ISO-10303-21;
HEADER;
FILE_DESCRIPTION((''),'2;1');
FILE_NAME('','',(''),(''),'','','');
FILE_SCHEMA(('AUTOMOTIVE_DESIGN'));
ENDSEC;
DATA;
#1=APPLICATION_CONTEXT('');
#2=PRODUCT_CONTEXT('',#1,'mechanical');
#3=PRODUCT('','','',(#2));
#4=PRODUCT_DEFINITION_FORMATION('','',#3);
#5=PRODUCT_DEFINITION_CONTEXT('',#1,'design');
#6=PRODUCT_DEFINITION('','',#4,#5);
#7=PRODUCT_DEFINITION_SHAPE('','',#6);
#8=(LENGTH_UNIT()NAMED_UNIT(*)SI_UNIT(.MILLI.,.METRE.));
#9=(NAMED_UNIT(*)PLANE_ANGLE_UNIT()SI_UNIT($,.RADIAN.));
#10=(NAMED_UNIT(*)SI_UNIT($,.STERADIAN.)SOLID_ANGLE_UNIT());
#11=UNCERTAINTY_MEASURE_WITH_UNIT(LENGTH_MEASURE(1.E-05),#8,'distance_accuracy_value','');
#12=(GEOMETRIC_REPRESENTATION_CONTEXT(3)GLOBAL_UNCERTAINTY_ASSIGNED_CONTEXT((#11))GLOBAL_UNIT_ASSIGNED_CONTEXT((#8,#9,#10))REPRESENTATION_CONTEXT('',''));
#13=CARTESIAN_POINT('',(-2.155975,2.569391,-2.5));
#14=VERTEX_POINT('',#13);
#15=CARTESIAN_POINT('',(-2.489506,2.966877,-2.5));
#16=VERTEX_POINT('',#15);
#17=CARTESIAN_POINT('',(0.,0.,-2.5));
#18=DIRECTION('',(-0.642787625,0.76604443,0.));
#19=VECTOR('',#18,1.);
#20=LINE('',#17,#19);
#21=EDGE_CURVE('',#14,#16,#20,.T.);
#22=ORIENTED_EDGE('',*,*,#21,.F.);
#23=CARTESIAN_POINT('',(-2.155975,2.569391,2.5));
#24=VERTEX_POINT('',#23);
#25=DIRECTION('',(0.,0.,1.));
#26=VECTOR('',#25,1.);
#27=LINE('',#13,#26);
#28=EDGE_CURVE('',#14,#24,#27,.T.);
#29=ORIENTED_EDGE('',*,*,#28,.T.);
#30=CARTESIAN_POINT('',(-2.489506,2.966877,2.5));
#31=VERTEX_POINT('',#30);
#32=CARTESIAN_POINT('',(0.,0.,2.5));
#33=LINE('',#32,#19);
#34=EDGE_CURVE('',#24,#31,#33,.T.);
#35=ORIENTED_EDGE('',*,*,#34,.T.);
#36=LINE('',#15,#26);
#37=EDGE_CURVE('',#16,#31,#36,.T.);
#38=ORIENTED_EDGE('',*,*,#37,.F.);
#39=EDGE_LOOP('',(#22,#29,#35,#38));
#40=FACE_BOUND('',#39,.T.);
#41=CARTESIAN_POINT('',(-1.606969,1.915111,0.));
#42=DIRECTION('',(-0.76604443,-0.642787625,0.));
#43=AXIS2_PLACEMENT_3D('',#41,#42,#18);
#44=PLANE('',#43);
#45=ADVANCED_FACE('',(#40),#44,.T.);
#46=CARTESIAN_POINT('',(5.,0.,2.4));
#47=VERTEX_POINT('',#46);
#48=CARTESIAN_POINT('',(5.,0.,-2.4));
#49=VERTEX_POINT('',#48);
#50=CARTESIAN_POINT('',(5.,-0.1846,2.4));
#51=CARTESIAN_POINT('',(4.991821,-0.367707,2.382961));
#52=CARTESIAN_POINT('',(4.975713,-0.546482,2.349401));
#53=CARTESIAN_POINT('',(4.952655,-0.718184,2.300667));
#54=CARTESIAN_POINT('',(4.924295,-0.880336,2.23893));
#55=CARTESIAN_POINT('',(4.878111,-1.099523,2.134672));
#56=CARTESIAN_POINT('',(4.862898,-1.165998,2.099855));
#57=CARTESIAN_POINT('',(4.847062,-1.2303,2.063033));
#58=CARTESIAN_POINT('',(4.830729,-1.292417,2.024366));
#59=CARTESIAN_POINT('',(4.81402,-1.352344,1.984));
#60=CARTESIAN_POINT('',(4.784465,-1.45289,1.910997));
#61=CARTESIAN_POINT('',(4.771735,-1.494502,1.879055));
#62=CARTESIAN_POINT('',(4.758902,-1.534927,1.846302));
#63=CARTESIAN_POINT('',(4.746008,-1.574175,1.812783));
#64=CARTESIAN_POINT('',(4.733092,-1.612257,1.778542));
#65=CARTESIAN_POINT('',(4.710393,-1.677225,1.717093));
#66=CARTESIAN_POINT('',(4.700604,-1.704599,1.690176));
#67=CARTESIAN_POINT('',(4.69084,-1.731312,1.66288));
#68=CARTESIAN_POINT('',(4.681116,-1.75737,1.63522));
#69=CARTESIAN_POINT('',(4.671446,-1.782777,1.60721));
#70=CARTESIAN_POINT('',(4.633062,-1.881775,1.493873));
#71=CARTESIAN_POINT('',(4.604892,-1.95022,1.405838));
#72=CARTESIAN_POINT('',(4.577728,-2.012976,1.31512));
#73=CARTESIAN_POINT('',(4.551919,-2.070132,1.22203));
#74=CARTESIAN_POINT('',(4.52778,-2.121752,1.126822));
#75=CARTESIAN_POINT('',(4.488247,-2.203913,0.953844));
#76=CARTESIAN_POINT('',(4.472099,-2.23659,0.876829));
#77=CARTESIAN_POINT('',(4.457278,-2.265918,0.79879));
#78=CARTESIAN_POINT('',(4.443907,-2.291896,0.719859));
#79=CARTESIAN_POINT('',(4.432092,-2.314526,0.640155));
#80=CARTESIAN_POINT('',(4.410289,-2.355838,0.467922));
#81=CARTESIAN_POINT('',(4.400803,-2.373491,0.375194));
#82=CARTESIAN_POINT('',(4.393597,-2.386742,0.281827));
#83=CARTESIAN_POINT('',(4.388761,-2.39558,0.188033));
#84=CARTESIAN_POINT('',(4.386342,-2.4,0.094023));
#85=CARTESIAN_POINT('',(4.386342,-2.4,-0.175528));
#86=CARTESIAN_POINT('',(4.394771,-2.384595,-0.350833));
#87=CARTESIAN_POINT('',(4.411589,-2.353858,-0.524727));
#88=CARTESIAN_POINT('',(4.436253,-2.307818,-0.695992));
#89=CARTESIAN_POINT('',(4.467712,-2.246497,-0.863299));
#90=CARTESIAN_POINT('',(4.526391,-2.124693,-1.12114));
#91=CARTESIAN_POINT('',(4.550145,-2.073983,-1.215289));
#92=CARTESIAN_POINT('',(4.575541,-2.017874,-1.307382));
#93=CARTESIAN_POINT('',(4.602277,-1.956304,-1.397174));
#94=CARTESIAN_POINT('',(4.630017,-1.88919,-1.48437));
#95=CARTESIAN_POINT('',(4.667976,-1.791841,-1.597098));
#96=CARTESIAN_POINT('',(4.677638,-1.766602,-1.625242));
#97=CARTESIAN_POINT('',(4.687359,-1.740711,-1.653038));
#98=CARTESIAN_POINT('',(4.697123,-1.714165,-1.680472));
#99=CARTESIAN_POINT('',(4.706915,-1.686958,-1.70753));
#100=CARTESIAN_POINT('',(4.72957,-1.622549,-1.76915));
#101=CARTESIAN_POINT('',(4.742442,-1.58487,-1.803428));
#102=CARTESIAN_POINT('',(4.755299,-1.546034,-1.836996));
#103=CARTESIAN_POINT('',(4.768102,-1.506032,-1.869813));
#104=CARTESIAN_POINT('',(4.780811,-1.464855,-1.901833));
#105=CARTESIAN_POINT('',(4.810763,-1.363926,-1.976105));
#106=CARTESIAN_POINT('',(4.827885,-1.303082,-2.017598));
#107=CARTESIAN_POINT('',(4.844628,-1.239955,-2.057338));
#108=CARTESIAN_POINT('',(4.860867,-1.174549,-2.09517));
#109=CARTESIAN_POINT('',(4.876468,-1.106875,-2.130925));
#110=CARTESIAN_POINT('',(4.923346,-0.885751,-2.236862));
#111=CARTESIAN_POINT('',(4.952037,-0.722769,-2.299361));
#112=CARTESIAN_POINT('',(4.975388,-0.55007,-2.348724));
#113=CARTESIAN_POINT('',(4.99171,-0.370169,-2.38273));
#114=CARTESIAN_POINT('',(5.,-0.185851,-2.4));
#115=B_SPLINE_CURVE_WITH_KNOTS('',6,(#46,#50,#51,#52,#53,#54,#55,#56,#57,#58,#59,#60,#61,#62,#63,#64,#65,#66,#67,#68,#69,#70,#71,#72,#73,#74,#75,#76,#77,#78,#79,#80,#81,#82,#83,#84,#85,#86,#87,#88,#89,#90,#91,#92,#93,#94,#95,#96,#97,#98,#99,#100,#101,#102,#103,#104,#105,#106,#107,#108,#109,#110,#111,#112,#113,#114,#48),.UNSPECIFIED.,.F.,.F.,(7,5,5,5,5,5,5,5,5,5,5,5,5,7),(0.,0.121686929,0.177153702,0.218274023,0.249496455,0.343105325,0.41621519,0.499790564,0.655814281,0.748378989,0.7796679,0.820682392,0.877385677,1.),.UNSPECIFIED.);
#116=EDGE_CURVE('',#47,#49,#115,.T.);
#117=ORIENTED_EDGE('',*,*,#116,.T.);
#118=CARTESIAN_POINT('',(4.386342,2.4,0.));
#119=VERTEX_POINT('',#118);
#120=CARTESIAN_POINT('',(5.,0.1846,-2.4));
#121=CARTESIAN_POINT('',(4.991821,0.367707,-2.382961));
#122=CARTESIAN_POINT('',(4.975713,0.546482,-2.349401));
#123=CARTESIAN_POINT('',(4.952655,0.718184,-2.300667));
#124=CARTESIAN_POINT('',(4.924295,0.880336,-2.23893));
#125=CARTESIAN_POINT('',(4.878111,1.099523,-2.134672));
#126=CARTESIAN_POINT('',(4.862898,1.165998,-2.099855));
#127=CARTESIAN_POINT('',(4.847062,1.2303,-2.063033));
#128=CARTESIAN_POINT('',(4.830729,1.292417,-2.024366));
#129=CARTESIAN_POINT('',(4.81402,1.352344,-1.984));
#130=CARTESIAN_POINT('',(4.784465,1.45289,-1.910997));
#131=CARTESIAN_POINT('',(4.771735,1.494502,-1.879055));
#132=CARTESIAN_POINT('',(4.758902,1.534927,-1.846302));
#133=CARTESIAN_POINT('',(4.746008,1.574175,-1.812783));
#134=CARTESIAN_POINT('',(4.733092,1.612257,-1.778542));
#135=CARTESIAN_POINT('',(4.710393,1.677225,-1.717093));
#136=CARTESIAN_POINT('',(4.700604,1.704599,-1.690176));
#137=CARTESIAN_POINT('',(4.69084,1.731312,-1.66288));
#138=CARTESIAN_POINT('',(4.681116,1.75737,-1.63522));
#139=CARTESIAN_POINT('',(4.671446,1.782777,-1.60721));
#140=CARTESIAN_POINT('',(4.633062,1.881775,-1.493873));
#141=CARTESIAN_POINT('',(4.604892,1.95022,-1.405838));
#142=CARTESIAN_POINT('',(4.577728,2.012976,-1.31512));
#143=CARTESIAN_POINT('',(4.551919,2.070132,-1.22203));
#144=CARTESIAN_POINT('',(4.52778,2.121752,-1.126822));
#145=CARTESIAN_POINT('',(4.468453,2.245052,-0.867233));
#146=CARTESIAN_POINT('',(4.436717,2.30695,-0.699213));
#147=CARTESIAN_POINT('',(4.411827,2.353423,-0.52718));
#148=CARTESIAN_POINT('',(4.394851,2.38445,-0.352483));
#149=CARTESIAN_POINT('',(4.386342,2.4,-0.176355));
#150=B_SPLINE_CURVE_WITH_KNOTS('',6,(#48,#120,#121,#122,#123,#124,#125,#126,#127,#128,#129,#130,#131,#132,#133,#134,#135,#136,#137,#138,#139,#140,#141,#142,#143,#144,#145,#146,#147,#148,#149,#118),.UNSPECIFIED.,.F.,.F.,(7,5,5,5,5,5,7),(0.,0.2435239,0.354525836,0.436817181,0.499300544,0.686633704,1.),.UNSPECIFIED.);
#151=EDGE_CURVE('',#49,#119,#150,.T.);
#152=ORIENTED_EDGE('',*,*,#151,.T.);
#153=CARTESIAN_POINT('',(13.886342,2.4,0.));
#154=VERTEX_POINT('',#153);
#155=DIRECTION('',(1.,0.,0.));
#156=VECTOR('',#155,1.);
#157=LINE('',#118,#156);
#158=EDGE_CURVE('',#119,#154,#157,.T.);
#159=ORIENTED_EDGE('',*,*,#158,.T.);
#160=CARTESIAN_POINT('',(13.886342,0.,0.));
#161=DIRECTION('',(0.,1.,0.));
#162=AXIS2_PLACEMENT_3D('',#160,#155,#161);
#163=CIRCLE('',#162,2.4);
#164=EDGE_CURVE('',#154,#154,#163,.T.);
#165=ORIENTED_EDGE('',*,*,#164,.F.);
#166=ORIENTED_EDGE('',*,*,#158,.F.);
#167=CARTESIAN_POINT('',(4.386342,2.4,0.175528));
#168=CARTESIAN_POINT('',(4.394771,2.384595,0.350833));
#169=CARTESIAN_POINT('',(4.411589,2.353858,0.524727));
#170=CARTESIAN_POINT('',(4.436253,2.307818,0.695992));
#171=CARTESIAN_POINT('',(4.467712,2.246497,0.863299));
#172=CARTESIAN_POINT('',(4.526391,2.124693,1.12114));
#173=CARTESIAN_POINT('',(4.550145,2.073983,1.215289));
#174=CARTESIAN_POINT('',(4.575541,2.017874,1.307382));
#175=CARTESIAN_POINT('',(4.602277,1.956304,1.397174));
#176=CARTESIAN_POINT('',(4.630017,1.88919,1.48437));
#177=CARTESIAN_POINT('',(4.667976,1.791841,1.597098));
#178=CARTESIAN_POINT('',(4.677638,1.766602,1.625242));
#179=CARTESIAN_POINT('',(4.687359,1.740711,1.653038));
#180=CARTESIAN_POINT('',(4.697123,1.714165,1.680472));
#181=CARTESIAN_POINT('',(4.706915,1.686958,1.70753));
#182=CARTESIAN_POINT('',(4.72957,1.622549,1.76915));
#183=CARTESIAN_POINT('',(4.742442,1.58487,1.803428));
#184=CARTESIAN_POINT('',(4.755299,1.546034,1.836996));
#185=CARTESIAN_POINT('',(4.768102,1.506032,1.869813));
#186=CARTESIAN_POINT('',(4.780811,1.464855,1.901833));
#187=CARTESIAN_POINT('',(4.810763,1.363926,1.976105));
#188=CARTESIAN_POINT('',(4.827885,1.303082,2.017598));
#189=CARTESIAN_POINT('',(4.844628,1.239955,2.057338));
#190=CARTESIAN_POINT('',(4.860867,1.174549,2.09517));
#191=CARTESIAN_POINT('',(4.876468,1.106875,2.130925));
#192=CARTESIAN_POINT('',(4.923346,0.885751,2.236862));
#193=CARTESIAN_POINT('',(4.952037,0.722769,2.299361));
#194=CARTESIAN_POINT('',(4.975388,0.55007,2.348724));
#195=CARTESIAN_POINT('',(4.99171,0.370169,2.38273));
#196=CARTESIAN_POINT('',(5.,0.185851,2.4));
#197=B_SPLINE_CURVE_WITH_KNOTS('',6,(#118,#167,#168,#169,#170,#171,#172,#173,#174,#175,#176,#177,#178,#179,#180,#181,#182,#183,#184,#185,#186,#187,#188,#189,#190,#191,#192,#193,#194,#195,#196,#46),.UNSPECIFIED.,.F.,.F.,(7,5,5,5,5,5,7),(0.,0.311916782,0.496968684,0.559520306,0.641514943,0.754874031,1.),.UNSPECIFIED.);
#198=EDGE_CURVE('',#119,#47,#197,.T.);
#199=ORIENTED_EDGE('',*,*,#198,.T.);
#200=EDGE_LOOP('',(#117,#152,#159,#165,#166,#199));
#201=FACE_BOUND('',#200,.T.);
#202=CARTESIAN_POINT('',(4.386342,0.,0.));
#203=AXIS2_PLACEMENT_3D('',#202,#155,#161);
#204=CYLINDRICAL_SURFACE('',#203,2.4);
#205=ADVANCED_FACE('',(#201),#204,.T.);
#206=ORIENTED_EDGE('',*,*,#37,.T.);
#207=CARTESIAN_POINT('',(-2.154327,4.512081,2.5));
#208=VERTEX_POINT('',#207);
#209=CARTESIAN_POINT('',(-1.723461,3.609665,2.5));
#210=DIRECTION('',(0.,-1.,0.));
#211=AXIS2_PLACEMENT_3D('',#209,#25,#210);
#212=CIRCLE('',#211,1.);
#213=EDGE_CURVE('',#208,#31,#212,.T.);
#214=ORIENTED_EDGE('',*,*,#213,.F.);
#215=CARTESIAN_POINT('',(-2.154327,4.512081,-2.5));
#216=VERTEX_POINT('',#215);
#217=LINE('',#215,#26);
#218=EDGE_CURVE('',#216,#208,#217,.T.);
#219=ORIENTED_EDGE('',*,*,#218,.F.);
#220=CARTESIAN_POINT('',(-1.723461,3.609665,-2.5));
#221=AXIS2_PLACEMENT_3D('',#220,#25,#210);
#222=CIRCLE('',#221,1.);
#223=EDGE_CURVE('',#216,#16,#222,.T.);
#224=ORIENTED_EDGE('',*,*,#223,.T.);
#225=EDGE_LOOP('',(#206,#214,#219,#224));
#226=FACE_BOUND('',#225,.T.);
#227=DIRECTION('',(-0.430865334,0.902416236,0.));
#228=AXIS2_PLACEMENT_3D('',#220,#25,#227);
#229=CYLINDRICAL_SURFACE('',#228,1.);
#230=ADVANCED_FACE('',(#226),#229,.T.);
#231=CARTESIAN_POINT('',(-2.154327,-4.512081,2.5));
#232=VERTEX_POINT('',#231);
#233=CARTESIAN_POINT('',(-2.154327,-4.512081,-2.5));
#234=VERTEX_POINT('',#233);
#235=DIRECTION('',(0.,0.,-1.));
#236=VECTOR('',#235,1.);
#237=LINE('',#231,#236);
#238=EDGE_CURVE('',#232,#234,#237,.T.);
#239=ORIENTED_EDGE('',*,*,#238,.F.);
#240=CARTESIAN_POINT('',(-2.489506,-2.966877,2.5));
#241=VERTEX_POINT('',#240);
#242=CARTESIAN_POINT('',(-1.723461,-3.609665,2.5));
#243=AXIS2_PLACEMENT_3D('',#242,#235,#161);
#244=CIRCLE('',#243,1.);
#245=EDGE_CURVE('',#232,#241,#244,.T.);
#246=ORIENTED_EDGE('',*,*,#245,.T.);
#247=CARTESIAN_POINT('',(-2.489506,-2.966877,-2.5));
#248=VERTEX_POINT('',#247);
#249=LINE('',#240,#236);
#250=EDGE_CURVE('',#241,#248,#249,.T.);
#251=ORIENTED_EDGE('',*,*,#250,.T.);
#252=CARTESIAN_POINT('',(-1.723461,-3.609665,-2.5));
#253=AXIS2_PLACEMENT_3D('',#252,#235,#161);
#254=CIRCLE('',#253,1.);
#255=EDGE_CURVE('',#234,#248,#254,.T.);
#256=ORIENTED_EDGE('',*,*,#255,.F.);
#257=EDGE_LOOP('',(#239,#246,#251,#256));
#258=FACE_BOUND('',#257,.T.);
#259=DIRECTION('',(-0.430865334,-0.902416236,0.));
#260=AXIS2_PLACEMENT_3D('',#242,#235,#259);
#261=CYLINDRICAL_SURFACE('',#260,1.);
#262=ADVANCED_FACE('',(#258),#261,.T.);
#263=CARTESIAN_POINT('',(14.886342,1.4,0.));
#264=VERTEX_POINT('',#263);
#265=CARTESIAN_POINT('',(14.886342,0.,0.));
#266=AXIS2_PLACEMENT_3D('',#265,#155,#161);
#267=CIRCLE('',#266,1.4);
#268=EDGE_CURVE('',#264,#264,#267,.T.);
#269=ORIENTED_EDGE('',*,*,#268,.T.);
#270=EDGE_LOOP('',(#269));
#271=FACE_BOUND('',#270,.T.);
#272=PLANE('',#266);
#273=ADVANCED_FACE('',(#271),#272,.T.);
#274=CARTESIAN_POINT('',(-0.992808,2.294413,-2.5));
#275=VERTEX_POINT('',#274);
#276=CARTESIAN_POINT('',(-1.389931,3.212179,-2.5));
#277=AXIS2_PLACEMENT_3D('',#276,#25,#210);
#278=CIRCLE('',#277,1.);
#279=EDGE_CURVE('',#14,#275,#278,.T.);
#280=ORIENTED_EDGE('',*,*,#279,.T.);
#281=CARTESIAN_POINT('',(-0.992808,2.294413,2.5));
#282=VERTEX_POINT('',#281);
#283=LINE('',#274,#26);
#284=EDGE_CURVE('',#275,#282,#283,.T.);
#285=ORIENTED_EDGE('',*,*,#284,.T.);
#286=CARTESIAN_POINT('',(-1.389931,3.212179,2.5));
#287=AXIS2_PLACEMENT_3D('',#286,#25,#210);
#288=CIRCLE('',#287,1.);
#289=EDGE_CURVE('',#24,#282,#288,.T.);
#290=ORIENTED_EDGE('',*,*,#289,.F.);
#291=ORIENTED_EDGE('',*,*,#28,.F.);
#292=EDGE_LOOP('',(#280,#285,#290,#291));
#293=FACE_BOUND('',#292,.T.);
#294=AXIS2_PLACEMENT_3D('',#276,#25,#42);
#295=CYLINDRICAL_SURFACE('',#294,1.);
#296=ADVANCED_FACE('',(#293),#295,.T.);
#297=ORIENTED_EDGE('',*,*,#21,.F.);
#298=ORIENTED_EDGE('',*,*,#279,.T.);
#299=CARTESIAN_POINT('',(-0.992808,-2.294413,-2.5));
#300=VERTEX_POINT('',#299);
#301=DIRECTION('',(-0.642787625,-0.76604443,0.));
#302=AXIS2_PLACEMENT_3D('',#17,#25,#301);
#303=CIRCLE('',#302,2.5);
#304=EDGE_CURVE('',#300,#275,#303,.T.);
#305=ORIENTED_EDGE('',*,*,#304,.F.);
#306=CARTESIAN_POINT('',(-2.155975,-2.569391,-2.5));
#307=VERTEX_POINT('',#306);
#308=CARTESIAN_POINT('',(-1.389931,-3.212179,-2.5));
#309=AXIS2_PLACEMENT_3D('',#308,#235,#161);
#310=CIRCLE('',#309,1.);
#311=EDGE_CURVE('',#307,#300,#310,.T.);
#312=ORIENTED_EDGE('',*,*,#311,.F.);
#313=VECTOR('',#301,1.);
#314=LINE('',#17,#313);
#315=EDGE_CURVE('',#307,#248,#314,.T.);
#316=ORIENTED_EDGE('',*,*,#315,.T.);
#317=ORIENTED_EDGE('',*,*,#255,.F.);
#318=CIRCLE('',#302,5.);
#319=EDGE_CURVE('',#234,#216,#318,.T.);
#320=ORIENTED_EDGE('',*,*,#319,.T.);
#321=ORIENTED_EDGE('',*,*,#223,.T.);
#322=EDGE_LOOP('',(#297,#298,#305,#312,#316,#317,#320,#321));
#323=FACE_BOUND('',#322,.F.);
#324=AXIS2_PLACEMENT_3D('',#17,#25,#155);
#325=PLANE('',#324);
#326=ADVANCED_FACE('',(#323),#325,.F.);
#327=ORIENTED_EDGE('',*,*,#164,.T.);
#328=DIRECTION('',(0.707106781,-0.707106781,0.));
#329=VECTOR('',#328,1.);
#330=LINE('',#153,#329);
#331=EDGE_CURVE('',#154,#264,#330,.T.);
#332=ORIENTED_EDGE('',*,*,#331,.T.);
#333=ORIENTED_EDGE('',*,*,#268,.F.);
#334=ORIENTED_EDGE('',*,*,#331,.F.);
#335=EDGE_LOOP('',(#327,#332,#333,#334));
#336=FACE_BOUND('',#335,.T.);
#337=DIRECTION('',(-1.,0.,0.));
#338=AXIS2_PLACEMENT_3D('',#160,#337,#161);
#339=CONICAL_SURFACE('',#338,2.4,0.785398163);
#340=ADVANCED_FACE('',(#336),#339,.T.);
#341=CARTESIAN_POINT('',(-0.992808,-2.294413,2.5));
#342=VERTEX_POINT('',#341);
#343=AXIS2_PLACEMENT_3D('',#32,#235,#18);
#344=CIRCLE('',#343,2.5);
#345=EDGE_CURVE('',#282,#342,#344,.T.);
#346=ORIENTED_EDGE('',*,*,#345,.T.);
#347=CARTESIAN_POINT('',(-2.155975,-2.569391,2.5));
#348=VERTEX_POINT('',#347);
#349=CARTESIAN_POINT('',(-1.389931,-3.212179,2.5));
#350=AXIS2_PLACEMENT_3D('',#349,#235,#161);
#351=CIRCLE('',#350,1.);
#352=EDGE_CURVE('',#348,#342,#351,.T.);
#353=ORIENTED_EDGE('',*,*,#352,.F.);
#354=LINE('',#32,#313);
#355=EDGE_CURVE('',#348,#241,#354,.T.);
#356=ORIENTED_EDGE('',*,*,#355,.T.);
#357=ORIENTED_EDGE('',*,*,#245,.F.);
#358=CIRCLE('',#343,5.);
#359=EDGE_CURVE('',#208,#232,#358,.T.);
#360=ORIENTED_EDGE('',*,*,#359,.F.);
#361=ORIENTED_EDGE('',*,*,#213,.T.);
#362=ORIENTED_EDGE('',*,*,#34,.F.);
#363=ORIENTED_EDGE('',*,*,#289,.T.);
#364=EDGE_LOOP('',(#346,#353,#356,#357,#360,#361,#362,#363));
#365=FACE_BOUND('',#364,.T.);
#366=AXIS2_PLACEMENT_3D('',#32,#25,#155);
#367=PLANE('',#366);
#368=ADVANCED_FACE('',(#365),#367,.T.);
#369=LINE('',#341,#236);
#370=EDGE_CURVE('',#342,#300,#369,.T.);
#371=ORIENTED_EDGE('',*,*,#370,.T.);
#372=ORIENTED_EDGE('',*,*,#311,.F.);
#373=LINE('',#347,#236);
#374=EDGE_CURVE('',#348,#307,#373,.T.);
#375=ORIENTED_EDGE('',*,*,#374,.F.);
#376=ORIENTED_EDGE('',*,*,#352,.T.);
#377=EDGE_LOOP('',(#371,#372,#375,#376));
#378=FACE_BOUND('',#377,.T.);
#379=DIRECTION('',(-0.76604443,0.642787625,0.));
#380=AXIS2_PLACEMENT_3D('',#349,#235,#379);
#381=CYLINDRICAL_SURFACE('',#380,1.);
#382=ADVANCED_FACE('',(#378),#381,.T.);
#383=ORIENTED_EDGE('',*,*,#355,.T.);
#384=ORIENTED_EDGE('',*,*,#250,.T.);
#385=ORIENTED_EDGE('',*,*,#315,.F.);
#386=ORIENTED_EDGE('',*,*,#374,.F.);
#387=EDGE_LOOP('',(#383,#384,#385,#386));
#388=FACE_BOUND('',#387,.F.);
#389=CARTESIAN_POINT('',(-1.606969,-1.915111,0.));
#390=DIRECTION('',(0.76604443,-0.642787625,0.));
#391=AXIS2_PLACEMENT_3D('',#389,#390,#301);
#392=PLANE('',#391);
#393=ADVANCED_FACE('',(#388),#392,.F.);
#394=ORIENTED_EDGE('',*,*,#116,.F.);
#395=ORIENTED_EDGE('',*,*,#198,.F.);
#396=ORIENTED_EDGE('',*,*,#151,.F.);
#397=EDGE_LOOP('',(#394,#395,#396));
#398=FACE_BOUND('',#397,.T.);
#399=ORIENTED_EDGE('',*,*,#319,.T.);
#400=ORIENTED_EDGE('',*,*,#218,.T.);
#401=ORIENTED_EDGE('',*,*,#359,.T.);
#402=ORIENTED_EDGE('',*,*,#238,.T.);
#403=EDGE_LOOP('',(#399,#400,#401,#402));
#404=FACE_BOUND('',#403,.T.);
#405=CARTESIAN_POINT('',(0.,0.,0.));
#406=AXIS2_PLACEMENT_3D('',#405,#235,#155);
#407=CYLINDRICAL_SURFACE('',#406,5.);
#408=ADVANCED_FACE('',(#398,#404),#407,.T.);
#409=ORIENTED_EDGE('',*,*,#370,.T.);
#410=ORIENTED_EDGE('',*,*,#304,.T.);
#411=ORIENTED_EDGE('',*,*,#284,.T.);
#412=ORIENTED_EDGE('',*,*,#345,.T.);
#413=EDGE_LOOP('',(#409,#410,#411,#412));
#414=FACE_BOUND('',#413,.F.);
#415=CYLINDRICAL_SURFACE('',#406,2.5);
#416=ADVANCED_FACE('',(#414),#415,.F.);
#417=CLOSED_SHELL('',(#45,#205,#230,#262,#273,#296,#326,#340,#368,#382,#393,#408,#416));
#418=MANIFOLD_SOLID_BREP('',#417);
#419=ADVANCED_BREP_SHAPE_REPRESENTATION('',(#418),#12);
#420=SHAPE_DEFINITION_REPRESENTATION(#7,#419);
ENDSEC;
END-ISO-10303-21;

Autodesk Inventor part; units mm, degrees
ref_plane "YZ Plane" through (0, 0, 0) normal (1, 0, 0) x (0, 1, 0)
ref_plane "XZ Plane" through (0, 0, 0) normal (0, 1, 0) x (-1, 0, 0)
ref_plane "XY Plane" through (0, 0, 0) normal (0, 0, 1) x (1, 0, 0)
sketch "Sketch1" plane through (0, 0, 0) normal (0, 0, 1) x (1, 0, 0)
  circle A0 centre (0, 0) radius 5
  circle A1 centre (0, 0) radius 2.5
  line L0 (0, 0) -> (-5, 0) construction
  line L1 (0, 0) -> (-3.213938, 3.830222)
  line L2 (0, 0) -> (-3.213938, -3.830222)
  line L3 (4.386342, 2.4) -> (14.386342, 2.4)
  line L4 (14.386342, 2.4) -> (14.386342, -2.4)
  line L5 (14.386342, -2.4) -> (4.386342, -2.4)
  line L6 (4.386342, -2.4) -> (4.386342, 2.4)
  point P0 (-1.606969, 1.915111)
  point P1 (-1.606969, -1.915111)
  dimension "d0" = 10
  dimension "d1" = 5
  dimension "d2" = 50
  dimension "d3" = 50
  dimension "d4" = 4.8
  dimension "d5" = 10
extrude "Extrusion1" add sketch "Sketch1" along normal mid plane 5 contours A0 L6 | L6 A0 L2 A1 L1
sketch "Sketch2" plane through (0, 0, 0) normal (0, 0, 1) x (1, 0, 0)
  arc A0 (-3.213938, -3.830222) -> (-3.213938, 3.830222) centre (0, 0) ccw construction
  line L0 (4.386342, 2.4) -> (14.886342, 2.4)
  line L1 (14.886342, 2.4) -> (14.886342, -2.4)
  line L2 (14.886342, -2.4) -> (4.386342, -2.4)
  line L3 (4.386342, -2.4) -> (4.386342, 2.4)
  line L4 (4.386342, 0) -> (14.886342, 0)
  dimension "d8" = 4.8
  dimension "d9" = 10.5
revolve "Revolution1" add sketch "Sketch2" angle 360 about axis through (4.386342, 0, 0) along (1, 0, 0) contours L0 L1 L4 L3
chamfer "Chamfer1" distance 1 angle 45 1 edges at (14.8863, -2.4, 0)
fillet "Fillet1" radius 1 4 edges at (-1.607, 1.9151, 0) (-3.2139, 3.8302, 0) (-1.607, -1.9151, 0) (-3.2139, -3.8302, 0)
properties part number "joint_part_black_2"
